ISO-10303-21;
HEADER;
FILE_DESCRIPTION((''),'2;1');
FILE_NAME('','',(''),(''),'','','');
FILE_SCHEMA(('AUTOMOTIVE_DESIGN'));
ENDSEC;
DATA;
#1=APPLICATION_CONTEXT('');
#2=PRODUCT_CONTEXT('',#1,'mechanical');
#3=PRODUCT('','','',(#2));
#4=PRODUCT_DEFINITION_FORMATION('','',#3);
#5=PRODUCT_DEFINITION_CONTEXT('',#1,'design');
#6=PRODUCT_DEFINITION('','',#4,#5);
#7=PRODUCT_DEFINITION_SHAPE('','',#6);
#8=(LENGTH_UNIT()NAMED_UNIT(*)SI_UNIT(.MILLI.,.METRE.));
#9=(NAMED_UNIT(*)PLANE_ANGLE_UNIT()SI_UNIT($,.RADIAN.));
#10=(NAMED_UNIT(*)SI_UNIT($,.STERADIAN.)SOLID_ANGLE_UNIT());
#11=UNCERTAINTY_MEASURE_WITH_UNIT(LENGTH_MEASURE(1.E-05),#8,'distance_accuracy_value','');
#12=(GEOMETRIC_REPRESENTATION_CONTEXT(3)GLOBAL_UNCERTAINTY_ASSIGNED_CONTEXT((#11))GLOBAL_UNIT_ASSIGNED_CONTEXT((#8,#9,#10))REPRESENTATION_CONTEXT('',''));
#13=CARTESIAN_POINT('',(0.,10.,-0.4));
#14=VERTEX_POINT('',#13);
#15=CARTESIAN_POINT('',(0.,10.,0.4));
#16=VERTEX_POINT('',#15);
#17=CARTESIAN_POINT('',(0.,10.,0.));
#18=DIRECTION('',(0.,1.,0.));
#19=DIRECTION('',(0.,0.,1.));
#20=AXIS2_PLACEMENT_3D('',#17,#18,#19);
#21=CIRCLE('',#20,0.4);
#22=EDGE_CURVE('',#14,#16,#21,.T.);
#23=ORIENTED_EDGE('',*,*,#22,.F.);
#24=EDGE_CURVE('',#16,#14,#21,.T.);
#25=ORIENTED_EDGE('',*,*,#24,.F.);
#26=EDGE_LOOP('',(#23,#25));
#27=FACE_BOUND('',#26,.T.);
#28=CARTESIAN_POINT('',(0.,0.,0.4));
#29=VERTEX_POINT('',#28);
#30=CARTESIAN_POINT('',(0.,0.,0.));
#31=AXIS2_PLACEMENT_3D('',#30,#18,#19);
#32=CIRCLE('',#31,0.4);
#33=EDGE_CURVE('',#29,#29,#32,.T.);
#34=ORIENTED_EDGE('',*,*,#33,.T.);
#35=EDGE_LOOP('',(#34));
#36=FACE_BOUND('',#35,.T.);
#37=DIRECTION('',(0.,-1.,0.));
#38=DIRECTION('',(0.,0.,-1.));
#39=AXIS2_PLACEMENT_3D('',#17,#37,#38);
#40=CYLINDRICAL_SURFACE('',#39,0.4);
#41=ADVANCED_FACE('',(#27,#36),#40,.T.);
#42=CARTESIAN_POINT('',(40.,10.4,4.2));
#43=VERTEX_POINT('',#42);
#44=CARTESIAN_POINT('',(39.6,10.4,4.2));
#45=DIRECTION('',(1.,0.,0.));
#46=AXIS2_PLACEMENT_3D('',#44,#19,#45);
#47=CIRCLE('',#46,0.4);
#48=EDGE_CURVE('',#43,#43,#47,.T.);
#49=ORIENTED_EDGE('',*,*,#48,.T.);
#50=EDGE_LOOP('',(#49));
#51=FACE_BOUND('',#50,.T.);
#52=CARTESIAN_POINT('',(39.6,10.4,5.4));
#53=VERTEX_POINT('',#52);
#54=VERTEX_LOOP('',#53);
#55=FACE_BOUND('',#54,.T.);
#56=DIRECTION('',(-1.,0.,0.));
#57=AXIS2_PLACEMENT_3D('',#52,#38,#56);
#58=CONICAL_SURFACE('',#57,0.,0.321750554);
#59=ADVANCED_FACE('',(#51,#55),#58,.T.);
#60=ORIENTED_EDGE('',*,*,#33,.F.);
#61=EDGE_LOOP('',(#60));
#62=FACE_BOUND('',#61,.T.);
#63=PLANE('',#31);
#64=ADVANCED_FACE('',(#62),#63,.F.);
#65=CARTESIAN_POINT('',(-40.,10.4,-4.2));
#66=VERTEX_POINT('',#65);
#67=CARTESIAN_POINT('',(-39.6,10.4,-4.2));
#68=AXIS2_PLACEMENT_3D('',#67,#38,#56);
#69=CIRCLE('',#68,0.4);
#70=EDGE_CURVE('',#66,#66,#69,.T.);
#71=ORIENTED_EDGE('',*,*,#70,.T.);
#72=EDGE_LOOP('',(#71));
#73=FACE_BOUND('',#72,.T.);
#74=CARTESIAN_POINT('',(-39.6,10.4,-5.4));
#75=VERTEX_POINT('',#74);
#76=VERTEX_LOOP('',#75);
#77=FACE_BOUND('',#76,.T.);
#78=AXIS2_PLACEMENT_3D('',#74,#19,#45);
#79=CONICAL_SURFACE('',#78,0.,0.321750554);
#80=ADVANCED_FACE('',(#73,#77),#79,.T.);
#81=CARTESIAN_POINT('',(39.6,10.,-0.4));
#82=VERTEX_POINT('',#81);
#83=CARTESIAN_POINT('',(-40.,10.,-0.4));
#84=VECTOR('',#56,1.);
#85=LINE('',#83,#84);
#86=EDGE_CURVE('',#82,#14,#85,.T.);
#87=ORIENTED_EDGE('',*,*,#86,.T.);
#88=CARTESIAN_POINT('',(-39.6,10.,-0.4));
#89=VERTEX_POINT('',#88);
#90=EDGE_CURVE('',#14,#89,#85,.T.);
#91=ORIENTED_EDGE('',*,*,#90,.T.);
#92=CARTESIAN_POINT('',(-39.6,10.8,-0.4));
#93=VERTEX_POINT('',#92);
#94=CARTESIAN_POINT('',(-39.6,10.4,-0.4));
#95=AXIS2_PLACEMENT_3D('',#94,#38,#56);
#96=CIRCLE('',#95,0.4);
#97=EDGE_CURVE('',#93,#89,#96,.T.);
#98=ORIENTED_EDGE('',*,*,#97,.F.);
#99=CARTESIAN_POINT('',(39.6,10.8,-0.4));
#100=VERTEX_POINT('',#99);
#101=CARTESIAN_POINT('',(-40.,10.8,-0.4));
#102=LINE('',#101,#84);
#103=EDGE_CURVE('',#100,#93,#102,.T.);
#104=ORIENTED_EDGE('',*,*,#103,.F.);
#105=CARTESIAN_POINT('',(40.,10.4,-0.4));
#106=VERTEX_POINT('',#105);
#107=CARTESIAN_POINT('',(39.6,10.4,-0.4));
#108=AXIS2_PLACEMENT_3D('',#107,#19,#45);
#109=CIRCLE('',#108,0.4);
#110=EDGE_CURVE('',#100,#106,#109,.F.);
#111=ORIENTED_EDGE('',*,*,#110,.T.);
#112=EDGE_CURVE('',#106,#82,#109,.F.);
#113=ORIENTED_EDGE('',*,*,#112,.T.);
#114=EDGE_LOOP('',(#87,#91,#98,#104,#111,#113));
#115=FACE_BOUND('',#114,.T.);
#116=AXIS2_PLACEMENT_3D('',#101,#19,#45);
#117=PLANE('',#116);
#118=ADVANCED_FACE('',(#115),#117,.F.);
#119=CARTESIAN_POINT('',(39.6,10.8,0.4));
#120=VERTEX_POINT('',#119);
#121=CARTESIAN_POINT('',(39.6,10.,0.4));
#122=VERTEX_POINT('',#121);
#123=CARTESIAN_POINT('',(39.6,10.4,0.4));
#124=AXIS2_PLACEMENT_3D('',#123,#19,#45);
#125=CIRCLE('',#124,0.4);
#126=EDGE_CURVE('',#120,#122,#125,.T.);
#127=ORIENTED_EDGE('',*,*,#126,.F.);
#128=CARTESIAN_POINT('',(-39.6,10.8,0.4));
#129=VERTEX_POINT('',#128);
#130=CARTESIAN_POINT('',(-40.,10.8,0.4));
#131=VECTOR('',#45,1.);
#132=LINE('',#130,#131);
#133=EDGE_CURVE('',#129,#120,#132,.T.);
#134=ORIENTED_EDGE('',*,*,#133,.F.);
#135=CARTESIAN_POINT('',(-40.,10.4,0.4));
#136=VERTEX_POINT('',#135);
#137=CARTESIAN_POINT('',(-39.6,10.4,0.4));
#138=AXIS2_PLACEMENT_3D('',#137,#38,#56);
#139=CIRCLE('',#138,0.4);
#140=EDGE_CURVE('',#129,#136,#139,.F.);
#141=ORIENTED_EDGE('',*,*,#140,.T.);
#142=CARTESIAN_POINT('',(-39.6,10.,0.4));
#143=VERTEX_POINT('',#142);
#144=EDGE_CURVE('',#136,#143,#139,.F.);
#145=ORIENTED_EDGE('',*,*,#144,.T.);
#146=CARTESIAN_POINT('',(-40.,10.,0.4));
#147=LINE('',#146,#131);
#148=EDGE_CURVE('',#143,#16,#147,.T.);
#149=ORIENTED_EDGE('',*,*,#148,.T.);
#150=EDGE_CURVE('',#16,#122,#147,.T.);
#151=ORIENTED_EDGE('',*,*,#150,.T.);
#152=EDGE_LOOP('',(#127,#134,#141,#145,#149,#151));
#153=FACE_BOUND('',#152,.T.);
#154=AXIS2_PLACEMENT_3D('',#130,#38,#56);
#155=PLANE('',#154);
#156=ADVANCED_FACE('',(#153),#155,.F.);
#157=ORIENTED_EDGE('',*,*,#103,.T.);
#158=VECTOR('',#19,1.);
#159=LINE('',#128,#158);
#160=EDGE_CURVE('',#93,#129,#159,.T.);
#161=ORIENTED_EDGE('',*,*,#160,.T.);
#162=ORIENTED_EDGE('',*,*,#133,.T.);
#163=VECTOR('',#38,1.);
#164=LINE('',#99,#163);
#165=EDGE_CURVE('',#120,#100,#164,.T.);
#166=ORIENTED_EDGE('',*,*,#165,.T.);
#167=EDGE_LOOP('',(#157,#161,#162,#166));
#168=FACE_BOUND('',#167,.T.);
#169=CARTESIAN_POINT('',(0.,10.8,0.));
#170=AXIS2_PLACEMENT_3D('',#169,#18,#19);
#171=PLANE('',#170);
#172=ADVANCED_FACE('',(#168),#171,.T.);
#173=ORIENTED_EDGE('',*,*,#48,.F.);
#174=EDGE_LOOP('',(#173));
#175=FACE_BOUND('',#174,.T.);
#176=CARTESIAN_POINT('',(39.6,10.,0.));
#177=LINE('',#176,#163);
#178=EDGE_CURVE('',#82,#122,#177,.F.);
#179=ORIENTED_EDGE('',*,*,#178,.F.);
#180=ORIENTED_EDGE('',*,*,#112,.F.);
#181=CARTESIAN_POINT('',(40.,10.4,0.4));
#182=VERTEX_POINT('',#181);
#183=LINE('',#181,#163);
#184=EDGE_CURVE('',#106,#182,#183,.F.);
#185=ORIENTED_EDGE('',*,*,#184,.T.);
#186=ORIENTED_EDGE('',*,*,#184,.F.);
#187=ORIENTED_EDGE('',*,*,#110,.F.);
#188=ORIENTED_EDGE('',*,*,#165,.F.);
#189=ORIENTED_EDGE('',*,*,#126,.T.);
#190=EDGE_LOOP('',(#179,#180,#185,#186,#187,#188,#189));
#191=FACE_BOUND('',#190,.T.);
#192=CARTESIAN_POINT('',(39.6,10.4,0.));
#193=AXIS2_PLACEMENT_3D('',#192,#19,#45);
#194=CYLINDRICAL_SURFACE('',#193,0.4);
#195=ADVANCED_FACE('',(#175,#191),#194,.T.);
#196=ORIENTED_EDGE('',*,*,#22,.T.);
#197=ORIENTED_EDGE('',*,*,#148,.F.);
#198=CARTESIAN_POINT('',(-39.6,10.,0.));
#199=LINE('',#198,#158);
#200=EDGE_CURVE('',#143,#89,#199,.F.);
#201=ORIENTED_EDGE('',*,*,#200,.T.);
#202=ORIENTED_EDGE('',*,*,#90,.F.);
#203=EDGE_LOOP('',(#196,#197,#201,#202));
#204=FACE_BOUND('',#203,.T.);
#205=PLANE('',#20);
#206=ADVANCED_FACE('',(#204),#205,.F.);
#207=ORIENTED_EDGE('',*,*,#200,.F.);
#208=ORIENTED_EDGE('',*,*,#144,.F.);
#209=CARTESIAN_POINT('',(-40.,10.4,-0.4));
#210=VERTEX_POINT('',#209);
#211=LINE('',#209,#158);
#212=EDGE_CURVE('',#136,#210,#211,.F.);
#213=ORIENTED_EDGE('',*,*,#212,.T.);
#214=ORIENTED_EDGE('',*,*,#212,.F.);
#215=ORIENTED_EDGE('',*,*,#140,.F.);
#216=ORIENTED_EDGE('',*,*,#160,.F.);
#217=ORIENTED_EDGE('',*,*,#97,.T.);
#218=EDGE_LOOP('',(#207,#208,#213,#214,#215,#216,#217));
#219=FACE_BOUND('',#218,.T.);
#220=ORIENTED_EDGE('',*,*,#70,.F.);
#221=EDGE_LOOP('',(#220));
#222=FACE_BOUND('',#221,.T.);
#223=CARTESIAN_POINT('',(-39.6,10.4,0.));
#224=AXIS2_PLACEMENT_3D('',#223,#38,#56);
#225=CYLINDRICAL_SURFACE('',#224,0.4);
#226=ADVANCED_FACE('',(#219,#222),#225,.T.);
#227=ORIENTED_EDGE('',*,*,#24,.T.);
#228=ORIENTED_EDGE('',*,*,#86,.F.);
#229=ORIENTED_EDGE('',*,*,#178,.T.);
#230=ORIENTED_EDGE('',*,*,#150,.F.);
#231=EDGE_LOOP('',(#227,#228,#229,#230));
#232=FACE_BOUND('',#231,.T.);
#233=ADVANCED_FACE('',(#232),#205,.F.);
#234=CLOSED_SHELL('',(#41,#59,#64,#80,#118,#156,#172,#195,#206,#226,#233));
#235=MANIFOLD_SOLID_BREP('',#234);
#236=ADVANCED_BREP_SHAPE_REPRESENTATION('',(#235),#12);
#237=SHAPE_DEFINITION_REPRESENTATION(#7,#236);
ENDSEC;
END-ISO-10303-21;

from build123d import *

# Parameters (mm, degrees)
SKETCH_1_R      = 0.4
EXTRUDE_1_DEPTH = 10
SKETCH_2_W      = 80
SKETCH_2_H      = 0.8
EXTRUDE_2_DEPTH = 0.8
FILLET_1_R      = 0.4
SKETCH_3_R      = 0.4
EXTRUDE_3_DEPTH = 3.8
SKETCH_4_R      = 0.4
EXTRUDE_4_DEPTH = 3.8


with BuildPart() as part:
    # 草图1 → 凸台-拉伸1 (new body)
    with BuildSketch(Plane(origin=(0, 0, 0), x_dir=(1, 0, 0), z_dir=(0, 1, 0))):
        with Locations(Location((0, 0, 0), (0, 0, 270))):
            Circle(SKETCH_1_R)
    extrude(amount=EXTRUDE_1_DEPTH)

    # 草图2 → 凸台-拉伸2 (add)
    with BuildSketch(Plane(origin=(0, 10, 0), x_dir=(1, 0, 0), z_dir=(0, 1, 0))):
        Rectangle(SKETCH_2_W, SKETCH_2_H)
    extrude(amount=EXTRUDE_2_DEPTH)

    # 圆角1
    fillet_1_edges = [part.edges().sort_by_distance(p)[0] for p in [
        (40, 10, 0),
        (40, 10.8, 0),
        (-40, 10, 0),
        (-40, 10.8, 0),
    ]]
    fillet(fillet_1_edges, radius=FILLET_1_R - 0.0001)  # a hair under: the kernel refuses the full size

    # 草图3 → 凸台-拉伸3 (add)
    with BuildSketch(Plane.XY.offset(0.4)):
        with Locations((39.6, 10.4)):
            Circle(SKETCH_3_R)
    extrude(amount=EXTRUDE_3_DEPTH)

    # 草图4 → 凸台-拉伸4 (add)
    with BuildSketch(Plane(origin=(0, 0, -0.4), x_dir=(-1, 0, 0), z_dir=(0, 0, -1))):
        with Locations((39.6, 10.4)):
            Circle(SKETCH_4_R)
    extrude(amount=EXTRUDE_4_DEPTH)

    # 草图5 → 旋转1 (revolve)
    with BuildSketch(Plane(origin=(0, 10.4, 0), x_dir=(1, 0, 0), z_dir=(0, 1, 0))):
        Polygon((39.6, -4.2), (39.6, -5.4), (40, -4.2), align=None)
    revolve(axis=Axis((39.6, 10.4, 4.2), (0, 0, 1)))

    # 草图6 → 旋转2 (revolve)
    with BuildSketch(Plane(origin=(0, 10.4, 0), x_dir=(1, 0, 0), z_dir=(0, 1, 0))):
        Polygon((-39.6, 4.2), (-39.6, 5.4), (-40, 4.2), align=None)
    revolve(axis=Axis((-39.6, 10.4, -4.2), (0, 0, -1)))


solid = part.part
